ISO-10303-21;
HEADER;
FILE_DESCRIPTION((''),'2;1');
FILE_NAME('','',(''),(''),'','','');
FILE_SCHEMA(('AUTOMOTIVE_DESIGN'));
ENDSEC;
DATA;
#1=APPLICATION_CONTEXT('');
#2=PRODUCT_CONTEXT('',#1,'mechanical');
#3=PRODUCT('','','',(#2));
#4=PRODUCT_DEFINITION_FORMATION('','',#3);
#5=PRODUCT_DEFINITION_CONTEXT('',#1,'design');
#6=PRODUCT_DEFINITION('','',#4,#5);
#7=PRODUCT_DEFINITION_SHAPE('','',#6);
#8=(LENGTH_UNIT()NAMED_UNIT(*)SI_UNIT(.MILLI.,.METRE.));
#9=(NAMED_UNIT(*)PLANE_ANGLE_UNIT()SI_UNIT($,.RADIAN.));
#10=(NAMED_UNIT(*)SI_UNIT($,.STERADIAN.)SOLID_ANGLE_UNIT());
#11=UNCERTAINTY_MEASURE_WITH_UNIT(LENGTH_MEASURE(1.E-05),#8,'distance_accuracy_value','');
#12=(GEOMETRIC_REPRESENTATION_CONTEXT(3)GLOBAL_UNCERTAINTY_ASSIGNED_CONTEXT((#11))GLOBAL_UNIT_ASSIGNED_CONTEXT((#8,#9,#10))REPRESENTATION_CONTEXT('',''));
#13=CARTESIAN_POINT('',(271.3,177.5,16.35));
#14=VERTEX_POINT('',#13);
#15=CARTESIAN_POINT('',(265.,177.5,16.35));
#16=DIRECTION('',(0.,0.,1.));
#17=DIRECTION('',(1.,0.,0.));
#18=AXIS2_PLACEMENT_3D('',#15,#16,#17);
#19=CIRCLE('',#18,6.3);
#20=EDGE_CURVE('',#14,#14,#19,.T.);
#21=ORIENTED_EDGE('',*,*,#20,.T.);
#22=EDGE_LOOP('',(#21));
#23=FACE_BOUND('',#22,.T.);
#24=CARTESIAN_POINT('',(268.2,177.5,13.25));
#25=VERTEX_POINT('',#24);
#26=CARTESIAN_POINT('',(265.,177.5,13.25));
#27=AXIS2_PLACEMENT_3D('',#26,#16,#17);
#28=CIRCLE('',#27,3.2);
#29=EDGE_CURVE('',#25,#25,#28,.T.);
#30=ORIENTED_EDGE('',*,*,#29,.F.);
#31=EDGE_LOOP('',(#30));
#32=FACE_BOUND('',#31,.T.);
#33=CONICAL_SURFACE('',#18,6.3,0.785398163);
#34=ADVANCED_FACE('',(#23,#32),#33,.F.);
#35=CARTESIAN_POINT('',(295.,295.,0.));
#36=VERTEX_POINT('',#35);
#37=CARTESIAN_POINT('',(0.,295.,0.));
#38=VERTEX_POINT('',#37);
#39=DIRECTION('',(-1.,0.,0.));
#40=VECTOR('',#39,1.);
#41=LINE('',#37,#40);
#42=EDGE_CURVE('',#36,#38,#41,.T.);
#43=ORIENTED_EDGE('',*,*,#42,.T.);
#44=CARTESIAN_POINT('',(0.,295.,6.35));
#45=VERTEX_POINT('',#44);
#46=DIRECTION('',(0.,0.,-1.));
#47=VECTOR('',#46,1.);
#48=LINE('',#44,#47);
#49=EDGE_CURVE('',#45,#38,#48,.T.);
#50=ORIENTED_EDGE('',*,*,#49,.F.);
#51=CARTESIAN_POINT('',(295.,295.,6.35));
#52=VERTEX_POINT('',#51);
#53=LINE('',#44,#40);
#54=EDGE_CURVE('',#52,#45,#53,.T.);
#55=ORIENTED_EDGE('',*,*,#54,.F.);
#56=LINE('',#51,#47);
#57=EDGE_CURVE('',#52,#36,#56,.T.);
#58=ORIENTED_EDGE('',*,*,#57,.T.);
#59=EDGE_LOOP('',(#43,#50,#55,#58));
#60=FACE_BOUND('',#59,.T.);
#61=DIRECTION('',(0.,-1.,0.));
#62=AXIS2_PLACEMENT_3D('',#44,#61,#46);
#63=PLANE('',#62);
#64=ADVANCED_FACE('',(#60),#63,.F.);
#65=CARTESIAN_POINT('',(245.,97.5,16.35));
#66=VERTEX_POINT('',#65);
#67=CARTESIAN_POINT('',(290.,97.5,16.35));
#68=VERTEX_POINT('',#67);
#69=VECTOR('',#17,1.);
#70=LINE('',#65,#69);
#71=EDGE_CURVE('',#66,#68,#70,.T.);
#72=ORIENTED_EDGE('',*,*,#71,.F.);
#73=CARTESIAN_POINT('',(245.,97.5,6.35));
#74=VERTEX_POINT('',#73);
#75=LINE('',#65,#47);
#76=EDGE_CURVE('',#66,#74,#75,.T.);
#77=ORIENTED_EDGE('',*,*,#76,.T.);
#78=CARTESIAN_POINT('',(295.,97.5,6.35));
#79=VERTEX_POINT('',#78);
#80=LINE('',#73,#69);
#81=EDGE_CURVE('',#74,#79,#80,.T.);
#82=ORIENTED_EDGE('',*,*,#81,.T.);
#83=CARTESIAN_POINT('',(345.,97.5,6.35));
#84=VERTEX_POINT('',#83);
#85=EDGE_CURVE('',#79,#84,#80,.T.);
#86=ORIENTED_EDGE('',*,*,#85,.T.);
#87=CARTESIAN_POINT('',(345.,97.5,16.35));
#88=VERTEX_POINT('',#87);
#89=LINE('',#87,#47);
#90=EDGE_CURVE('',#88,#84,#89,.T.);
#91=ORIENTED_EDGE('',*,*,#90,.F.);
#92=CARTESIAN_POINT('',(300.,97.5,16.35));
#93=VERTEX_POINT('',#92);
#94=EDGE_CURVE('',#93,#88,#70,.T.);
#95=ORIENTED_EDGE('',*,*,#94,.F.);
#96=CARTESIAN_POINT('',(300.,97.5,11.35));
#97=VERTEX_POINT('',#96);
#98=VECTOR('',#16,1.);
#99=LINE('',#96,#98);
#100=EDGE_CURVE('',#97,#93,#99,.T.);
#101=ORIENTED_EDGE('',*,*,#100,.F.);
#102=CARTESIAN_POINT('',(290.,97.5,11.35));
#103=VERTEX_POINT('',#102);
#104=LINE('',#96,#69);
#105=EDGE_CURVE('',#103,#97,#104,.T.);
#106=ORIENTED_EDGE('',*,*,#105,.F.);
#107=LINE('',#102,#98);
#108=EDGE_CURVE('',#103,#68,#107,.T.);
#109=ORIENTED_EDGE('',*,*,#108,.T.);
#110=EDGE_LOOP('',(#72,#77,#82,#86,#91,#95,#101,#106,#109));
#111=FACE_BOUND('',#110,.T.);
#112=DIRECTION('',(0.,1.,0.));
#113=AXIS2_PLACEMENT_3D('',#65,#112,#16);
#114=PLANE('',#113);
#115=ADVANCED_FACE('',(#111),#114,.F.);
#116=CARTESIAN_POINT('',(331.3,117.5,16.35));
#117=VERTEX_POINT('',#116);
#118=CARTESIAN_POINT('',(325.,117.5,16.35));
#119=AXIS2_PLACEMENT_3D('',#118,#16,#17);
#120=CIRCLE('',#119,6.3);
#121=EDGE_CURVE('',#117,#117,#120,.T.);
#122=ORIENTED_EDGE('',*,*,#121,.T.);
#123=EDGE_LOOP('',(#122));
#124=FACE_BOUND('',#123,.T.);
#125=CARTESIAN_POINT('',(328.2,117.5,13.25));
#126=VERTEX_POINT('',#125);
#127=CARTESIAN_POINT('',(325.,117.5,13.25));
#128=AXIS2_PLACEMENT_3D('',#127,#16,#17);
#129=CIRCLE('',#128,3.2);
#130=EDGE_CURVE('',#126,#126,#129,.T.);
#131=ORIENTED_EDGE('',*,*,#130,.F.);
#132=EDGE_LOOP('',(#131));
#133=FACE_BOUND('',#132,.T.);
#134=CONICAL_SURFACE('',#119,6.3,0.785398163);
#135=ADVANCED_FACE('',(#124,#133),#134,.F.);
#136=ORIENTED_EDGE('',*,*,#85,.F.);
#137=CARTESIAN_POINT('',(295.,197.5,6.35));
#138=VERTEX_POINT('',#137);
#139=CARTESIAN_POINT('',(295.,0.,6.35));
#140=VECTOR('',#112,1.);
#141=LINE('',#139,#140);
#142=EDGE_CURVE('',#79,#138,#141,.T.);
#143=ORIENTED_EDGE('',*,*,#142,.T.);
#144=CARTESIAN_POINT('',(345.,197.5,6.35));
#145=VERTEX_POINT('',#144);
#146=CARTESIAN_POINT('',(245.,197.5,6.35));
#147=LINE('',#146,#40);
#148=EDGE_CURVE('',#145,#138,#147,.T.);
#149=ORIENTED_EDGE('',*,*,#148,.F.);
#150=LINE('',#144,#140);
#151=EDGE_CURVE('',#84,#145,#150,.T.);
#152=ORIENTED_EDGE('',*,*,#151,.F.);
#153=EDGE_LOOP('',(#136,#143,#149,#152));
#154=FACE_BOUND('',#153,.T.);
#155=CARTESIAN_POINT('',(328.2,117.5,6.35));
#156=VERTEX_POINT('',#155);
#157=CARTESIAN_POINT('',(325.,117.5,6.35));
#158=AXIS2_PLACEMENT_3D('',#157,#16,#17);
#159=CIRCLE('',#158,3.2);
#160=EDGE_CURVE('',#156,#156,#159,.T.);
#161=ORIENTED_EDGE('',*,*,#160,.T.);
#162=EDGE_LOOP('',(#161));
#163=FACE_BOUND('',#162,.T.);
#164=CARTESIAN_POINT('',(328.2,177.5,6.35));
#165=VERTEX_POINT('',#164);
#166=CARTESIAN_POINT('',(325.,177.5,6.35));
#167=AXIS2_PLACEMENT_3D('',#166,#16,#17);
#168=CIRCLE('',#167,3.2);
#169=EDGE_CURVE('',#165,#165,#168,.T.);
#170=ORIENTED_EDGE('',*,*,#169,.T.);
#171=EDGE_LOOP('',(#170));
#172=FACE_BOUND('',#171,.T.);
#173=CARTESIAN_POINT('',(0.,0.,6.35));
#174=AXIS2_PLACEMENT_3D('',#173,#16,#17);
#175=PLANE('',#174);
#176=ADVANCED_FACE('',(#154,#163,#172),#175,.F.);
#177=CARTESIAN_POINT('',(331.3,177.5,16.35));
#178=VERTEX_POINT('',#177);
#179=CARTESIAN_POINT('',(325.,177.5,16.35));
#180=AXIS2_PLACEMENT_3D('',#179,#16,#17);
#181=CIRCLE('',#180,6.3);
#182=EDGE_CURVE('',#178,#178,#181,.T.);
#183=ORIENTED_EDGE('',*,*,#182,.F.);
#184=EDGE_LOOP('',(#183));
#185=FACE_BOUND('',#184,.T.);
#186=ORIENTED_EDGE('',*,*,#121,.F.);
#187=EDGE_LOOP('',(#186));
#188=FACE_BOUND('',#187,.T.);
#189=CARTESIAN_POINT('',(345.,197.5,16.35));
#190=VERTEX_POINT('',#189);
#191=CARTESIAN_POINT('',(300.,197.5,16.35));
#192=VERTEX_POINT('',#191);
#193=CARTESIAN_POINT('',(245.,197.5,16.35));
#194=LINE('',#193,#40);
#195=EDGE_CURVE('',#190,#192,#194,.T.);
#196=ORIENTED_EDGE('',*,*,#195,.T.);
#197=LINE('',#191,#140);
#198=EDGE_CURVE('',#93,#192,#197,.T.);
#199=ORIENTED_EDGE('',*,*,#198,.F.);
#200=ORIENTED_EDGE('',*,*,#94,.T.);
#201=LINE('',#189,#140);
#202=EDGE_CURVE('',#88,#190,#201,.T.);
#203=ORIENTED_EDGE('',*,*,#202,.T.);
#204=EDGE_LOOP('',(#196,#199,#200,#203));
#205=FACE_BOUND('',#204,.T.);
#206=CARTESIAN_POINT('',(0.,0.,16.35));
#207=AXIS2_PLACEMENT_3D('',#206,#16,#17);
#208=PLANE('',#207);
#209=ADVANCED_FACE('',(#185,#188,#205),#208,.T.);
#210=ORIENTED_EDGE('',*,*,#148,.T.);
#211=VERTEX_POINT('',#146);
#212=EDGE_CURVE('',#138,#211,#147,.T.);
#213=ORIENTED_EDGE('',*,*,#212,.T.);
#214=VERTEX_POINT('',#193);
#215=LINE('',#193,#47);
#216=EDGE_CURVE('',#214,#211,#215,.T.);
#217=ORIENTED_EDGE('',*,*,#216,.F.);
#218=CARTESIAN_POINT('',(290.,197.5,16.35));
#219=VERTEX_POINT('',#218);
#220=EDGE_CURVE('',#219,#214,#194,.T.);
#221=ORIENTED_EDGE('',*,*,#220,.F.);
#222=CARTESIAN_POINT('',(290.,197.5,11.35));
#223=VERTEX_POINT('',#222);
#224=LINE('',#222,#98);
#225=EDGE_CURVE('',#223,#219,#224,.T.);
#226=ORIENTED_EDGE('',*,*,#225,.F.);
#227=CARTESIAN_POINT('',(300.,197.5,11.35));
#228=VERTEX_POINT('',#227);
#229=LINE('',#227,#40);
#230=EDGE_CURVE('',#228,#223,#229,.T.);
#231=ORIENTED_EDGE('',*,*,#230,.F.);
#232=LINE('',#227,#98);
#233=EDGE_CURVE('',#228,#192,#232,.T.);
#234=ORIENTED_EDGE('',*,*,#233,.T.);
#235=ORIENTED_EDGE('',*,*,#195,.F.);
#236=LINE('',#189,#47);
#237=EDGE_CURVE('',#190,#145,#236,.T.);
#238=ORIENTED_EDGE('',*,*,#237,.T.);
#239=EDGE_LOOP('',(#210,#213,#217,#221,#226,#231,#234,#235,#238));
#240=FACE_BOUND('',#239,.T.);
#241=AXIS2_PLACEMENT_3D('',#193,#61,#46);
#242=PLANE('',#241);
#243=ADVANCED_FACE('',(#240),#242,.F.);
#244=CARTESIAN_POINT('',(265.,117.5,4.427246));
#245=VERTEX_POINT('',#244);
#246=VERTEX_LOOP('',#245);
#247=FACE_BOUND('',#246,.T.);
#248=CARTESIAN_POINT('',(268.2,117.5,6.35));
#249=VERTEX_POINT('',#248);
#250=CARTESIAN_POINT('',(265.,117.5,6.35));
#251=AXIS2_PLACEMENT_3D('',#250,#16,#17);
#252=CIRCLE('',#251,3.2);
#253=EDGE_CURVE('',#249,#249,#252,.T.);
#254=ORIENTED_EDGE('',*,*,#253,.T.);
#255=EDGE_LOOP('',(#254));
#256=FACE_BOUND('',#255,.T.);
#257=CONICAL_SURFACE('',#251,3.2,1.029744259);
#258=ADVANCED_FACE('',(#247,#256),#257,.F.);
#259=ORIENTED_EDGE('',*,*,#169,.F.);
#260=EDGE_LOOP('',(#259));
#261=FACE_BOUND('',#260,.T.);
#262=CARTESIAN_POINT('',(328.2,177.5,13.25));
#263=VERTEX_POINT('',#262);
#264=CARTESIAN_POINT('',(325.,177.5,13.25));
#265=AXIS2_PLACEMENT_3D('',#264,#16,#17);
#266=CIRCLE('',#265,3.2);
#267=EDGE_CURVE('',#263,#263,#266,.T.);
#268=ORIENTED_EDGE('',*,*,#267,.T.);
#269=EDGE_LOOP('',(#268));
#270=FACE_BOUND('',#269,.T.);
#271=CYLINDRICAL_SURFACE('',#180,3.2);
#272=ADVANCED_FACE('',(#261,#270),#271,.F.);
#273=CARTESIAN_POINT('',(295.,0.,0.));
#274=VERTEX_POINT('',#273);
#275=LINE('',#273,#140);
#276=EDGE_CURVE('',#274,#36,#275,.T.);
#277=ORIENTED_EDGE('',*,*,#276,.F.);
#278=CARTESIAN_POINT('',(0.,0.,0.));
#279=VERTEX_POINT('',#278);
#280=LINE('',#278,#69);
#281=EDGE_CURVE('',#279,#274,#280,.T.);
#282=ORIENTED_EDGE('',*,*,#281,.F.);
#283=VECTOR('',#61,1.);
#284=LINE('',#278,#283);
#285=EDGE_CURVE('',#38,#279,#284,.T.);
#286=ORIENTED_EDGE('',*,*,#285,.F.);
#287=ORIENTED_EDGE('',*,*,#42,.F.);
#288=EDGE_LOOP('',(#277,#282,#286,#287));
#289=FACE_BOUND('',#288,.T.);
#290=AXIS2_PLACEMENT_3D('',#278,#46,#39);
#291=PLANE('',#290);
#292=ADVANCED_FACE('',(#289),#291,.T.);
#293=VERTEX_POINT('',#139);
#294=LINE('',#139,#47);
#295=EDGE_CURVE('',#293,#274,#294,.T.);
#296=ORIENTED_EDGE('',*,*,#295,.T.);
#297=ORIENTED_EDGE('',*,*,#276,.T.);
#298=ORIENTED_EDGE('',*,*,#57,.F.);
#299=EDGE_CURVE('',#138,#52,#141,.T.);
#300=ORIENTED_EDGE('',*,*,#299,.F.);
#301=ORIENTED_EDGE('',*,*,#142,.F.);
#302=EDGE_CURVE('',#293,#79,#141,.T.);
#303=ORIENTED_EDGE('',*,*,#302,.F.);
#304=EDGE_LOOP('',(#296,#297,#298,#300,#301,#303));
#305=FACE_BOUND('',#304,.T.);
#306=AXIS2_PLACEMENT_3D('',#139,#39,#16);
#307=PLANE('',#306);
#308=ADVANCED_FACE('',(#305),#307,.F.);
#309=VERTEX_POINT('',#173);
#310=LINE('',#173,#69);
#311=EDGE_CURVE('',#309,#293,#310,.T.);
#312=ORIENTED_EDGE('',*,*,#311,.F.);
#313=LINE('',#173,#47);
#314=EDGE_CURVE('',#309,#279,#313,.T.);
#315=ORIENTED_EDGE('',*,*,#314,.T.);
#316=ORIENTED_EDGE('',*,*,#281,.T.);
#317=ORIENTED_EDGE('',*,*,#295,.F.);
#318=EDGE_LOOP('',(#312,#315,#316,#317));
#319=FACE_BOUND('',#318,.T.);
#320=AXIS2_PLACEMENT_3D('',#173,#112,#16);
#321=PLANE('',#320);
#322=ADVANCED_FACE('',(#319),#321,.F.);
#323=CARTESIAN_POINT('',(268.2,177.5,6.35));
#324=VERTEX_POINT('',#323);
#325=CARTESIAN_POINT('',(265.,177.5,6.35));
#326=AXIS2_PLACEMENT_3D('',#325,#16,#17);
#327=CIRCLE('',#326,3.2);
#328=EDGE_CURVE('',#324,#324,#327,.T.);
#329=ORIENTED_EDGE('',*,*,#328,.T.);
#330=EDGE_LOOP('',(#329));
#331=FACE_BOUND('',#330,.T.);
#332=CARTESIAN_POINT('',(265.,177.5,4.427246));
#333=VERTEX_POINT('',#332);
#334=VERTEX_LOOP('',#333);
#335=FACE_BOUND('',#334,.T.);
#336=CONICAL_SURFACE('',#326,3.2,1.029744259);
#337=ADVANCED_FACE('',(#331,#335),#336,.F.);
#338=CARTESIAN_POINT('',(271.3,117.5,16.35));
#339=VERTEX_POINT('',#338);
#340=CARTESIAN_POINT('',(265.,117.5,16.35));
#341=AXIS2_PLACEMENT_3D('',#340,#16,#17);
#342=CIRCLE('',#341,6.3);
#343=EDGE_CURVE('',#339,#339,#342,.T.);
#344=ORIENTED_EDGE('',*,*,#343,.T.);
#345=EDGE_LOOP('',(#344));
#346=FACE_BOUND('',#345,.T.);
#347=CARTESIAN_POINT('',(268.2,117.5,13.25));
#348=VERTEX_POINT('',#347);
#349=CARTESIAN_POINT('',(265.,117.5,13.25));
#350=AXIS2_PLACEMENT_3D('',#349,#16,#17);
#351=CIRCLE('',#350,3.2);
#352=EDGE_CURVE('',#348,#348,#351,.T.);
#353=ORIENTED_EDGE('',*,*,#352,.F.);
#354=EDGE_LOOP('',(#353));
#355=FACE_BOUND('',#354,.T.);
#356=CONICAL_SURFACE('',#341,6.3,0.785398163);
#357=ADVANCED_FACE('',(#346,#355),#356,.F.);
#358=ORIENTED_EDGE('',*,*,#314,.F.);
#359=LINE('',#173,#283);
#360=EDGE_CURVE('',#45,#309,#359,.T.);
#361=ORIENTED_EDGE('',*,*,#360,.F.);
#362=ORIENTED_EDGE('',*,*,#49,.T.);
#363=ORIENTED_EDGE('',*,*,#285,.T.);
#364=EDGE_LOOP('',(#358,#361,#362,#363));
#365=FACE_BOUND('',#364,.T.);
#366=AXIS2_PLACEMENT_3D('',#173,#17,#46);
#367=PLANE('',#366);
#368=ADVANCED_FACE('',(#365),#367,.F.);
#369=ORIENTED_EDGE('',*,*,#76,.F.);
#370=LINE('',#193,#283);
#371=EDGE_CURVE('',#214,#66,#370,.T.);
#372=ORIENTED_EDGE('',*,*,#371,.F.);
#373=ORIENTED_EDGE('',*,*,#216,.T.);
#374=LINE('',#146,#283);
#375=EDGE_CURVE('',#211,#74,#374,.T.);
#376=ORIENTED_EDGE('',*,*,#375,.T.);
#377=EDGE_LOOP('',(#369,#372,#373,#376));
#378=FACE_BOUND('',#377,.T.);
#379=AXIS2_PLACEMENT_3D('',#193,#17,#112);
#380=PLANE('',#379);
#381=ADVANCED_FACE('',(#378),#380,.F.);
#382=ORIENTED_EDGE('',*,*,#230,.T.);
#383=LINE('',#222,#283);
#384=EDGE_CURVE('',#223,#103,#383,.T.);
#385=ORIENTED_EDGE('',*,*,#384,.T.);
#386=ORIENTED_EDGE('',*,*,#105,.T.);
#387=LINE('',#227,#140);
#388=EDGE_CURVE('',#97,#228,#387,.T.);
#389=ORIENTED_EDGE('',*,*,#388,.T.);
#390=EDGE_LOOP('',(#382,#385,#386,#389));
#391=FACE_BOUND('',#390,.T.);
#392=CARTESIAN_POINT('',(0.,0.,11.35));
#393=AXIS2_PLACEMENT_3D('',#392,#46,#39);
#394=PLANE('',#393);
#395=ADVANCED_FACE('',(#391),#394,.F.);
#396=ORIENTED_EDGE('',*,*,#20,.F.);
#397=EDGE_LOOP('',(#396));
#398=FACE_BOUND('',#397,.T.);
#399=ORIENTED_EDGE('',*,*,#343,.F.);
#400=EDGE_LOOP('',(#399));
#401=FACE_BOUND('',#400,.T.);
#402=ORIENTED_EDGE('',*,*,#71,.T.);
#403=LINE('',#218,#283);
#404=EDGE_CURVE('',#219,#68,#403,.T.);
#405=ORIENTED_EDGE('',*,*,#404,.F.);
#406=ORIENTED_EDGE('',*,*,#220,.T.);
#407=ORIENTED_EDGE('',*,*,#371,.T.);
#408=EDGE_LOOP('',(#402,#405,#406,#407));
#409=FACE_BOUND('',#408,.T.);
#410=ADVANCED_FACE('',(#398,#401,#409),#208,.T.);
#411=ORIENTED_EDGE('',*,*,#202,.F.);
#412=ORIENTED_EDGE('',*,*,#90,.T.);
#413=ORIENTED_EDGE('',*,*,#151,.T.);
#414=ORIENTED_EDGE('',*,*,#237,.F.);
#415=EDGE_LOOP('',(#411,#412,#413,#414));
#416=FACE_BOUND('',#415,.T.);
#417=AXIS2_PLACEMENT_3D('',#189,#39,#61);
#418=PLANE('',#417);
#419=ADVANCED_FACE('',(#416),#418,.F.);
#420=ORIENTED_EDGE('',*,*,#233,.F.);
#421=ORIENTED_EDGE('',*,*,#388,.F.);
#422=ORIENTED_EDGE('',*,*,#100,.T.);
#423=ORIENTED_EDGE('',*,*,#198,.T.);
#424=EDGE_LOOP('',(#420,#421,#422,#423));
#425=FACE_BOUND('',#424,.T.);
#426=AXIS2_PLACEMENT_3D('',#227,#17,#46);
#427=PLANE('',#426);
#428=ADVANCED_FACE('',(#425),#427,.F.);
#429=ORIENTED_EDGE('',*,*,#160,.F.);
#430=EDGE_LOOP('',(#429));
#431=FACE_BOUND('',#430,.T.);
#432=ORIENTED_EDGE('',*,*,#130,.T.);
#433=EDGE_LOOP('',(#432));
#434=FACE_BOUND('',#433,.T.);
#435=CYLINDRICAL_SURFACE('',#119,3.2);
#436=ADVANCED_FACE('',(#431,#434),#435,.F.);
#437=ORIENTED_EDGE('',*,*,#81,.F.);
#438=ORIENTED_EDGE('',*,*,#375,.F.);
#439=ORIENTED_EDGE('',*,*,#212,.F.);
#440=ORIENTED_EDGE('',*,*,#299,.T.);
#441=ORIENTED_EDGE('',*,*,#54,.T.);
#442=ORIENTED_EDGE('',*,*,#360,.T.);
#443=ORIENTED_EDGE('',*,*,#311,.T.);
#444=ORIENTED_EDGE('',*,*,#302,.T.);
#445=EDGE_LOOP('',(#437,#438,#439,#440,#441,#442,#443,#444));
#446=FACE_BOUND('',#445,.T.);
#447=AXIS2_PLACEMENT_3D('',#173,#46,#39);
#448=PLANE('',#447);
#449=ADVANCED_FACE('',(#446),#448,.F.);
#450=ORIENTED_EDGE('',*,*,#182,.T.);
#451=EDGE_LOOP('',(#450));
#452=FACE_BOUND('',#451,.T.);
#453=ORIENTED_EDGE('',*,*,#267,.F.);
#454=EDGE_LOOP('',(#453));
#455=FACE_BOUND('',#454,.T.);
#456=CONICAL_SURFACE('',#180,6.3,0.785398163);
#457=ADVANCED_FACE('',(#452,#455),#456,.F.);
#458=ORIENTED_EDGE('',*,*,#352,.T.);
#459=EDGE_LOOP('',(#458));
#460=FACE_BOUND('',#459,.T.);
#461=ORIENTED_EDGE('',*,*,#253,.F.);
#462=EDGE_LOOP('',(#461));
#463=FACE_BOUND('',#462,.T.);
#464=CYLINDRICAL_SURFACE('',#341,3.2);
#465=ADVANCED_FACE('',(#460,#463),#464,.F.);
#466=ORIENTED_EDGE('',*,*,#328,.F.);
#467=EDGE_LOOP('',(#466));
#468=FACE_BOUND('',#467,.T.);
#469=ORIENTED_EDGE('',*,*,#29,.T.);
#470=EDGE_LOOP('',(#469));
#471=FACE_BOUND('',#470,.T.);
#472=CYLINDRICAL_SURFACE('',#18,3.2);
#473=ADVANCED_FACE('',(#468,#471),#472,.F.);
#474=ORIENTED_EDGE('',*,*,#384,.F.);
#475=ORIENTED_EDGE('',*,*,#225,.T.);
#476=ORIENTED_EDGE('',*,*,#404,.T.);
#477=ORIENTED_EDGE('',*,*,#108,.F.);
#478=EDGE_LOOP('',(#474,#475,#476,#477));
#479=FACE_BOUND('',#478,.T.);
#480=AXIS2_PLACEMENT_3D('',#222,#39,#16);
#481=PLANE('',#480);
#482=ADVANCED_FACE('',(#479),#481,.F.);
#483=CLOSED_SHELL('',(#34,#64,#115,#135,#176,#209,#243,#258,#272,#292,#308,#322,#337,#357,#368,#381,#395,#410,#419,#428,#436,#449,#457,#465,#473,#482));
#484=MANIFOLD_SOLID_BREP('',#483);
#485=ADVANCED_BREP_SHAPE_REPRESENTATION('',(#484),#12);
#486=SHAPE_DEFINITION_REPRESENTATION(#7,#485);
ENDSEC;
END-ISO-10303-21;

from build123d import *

# Parameters (mm, degrees)
SKETCH1_W           = 295
SKETCH1_H           = 295
BOSS_EXTRUDE1_DEPTH = 6.35
SKETCH2_W           = 100
SKETCH2_H           = 100
BOSS_EXTRUDE2_DEPTH = 10
SKETCH6_W           = 10
SKETCH6_H           = 100
CUT_EXTRUDE1_DEPTH  = 5


# Read off the part's stored shape, not the designer's step: CSK for M6 Flat Head Machine Screw1
with BuildPart() as part:
    # Sketch1 → Boss-Extrude1 (new body)
    with BuildSketch(Plane.XY):
        with Locations((147.5, 147.5)):
            Rectangle(SKETCH1_W, SKETCH1_H)
    extrude(amount=BOSS_EXTRUDE1_DEPTH)

    # Sketch2 → Boss-Extrude2 (add)
    with BuildSketch(Plane.XY.offset(6.35)):
        with Locations((295, 147.5)):
            Rectangle(SKETCH2_W, SKETCH2_H)
    extrude(amount=BOSS_EXTRUDE2_DEPTH)

    # CSK for M6 Flat Head Machine Screw1 outl → CSK for M6 Flat Head Machine Screw1 (revolve, cut)
    with BuildSketch(Plane(origin=(325, 177.5, 0), x_dir=(1, 0, 0), z_dir=(0, -1, 0))):
        Polygon((0, 6.35), (3.2, 6.35), (3.2, 13.25), (6.3, 16.35), (0, 16.35), align=None)
    revolve(axis=Axis((325, 177.5, 0), (0, 0, 1)), mode=Mode.SUBTRACT)

    # CSK for M6 Flat Head Machine Screw1 2 ou → CSK for M6 Flat Head Machine Screw1 2 (revolve, cut)
    with BuildSketch(Plane(origin=(265, 117.5, 0), x_dir=(1, 0, 0), z_dir=(0, -1, 0))):
        Polygon((0, 16.35), (0, 4.427246019), (3.2, 6.35), (3.2, 13.25), (6.3, 16.35), align=None)
    revolve(axis=Axis((265, 117.5, 0), (0, 0, 1)), mode=Mode.SUBTRACT)

    # CSK for M6 Flat Head Machine Screw1 3 ou → CSK for M6 Flat Head Machine Screw1 3 (revolve, cut)
    with BuildSketch(Plane(origin=(325, 117.5, 0), x_dir=(1, 0, 0), z_dir=(0, -1, 0))):
        Polygon((0, 6.35), (3.2, 6.35), (3.2, 13.25), (6.3, 16.35), (0, 16.35), align=None)
    revolve(axis=Axis((325, 117.5, 0), (0, 0, 1)), mode=Mode.SUBTRACT)

    # CSK for M6 Flat Head Machine Screw1 4 ou → CSK for M6 Flat Head Machine Screw1 4 (revolve, cut)
    with BuildSketch(Plane(origin=(265, 177.5, 0), x_dir=(1, 0, 0), z_dir=(0, -1, 0))):
        Polygon((0, 16.35), (0, 4.427246019), (3.2, 6.35), (3.2, 13.25), (6.3, 16.35), align=None)
    revolve(axis=Axis((265, 177.5, 0), (0, 0, 1)), mode=Mode.SUBTRACT)

    # Sketch6 → Cut-Extrude1 (cut)
    with BuildSketch(Plane.XY.offset(16.35)):
        with Locations((295, 147.5)):
            Rectangle(SKETCH6_W, SKETCH6_H)
    extrude(amount=-CUT_EXTRUDE1_DEPTH, mode=Mode.SUBTRACT)


solid = part.part
